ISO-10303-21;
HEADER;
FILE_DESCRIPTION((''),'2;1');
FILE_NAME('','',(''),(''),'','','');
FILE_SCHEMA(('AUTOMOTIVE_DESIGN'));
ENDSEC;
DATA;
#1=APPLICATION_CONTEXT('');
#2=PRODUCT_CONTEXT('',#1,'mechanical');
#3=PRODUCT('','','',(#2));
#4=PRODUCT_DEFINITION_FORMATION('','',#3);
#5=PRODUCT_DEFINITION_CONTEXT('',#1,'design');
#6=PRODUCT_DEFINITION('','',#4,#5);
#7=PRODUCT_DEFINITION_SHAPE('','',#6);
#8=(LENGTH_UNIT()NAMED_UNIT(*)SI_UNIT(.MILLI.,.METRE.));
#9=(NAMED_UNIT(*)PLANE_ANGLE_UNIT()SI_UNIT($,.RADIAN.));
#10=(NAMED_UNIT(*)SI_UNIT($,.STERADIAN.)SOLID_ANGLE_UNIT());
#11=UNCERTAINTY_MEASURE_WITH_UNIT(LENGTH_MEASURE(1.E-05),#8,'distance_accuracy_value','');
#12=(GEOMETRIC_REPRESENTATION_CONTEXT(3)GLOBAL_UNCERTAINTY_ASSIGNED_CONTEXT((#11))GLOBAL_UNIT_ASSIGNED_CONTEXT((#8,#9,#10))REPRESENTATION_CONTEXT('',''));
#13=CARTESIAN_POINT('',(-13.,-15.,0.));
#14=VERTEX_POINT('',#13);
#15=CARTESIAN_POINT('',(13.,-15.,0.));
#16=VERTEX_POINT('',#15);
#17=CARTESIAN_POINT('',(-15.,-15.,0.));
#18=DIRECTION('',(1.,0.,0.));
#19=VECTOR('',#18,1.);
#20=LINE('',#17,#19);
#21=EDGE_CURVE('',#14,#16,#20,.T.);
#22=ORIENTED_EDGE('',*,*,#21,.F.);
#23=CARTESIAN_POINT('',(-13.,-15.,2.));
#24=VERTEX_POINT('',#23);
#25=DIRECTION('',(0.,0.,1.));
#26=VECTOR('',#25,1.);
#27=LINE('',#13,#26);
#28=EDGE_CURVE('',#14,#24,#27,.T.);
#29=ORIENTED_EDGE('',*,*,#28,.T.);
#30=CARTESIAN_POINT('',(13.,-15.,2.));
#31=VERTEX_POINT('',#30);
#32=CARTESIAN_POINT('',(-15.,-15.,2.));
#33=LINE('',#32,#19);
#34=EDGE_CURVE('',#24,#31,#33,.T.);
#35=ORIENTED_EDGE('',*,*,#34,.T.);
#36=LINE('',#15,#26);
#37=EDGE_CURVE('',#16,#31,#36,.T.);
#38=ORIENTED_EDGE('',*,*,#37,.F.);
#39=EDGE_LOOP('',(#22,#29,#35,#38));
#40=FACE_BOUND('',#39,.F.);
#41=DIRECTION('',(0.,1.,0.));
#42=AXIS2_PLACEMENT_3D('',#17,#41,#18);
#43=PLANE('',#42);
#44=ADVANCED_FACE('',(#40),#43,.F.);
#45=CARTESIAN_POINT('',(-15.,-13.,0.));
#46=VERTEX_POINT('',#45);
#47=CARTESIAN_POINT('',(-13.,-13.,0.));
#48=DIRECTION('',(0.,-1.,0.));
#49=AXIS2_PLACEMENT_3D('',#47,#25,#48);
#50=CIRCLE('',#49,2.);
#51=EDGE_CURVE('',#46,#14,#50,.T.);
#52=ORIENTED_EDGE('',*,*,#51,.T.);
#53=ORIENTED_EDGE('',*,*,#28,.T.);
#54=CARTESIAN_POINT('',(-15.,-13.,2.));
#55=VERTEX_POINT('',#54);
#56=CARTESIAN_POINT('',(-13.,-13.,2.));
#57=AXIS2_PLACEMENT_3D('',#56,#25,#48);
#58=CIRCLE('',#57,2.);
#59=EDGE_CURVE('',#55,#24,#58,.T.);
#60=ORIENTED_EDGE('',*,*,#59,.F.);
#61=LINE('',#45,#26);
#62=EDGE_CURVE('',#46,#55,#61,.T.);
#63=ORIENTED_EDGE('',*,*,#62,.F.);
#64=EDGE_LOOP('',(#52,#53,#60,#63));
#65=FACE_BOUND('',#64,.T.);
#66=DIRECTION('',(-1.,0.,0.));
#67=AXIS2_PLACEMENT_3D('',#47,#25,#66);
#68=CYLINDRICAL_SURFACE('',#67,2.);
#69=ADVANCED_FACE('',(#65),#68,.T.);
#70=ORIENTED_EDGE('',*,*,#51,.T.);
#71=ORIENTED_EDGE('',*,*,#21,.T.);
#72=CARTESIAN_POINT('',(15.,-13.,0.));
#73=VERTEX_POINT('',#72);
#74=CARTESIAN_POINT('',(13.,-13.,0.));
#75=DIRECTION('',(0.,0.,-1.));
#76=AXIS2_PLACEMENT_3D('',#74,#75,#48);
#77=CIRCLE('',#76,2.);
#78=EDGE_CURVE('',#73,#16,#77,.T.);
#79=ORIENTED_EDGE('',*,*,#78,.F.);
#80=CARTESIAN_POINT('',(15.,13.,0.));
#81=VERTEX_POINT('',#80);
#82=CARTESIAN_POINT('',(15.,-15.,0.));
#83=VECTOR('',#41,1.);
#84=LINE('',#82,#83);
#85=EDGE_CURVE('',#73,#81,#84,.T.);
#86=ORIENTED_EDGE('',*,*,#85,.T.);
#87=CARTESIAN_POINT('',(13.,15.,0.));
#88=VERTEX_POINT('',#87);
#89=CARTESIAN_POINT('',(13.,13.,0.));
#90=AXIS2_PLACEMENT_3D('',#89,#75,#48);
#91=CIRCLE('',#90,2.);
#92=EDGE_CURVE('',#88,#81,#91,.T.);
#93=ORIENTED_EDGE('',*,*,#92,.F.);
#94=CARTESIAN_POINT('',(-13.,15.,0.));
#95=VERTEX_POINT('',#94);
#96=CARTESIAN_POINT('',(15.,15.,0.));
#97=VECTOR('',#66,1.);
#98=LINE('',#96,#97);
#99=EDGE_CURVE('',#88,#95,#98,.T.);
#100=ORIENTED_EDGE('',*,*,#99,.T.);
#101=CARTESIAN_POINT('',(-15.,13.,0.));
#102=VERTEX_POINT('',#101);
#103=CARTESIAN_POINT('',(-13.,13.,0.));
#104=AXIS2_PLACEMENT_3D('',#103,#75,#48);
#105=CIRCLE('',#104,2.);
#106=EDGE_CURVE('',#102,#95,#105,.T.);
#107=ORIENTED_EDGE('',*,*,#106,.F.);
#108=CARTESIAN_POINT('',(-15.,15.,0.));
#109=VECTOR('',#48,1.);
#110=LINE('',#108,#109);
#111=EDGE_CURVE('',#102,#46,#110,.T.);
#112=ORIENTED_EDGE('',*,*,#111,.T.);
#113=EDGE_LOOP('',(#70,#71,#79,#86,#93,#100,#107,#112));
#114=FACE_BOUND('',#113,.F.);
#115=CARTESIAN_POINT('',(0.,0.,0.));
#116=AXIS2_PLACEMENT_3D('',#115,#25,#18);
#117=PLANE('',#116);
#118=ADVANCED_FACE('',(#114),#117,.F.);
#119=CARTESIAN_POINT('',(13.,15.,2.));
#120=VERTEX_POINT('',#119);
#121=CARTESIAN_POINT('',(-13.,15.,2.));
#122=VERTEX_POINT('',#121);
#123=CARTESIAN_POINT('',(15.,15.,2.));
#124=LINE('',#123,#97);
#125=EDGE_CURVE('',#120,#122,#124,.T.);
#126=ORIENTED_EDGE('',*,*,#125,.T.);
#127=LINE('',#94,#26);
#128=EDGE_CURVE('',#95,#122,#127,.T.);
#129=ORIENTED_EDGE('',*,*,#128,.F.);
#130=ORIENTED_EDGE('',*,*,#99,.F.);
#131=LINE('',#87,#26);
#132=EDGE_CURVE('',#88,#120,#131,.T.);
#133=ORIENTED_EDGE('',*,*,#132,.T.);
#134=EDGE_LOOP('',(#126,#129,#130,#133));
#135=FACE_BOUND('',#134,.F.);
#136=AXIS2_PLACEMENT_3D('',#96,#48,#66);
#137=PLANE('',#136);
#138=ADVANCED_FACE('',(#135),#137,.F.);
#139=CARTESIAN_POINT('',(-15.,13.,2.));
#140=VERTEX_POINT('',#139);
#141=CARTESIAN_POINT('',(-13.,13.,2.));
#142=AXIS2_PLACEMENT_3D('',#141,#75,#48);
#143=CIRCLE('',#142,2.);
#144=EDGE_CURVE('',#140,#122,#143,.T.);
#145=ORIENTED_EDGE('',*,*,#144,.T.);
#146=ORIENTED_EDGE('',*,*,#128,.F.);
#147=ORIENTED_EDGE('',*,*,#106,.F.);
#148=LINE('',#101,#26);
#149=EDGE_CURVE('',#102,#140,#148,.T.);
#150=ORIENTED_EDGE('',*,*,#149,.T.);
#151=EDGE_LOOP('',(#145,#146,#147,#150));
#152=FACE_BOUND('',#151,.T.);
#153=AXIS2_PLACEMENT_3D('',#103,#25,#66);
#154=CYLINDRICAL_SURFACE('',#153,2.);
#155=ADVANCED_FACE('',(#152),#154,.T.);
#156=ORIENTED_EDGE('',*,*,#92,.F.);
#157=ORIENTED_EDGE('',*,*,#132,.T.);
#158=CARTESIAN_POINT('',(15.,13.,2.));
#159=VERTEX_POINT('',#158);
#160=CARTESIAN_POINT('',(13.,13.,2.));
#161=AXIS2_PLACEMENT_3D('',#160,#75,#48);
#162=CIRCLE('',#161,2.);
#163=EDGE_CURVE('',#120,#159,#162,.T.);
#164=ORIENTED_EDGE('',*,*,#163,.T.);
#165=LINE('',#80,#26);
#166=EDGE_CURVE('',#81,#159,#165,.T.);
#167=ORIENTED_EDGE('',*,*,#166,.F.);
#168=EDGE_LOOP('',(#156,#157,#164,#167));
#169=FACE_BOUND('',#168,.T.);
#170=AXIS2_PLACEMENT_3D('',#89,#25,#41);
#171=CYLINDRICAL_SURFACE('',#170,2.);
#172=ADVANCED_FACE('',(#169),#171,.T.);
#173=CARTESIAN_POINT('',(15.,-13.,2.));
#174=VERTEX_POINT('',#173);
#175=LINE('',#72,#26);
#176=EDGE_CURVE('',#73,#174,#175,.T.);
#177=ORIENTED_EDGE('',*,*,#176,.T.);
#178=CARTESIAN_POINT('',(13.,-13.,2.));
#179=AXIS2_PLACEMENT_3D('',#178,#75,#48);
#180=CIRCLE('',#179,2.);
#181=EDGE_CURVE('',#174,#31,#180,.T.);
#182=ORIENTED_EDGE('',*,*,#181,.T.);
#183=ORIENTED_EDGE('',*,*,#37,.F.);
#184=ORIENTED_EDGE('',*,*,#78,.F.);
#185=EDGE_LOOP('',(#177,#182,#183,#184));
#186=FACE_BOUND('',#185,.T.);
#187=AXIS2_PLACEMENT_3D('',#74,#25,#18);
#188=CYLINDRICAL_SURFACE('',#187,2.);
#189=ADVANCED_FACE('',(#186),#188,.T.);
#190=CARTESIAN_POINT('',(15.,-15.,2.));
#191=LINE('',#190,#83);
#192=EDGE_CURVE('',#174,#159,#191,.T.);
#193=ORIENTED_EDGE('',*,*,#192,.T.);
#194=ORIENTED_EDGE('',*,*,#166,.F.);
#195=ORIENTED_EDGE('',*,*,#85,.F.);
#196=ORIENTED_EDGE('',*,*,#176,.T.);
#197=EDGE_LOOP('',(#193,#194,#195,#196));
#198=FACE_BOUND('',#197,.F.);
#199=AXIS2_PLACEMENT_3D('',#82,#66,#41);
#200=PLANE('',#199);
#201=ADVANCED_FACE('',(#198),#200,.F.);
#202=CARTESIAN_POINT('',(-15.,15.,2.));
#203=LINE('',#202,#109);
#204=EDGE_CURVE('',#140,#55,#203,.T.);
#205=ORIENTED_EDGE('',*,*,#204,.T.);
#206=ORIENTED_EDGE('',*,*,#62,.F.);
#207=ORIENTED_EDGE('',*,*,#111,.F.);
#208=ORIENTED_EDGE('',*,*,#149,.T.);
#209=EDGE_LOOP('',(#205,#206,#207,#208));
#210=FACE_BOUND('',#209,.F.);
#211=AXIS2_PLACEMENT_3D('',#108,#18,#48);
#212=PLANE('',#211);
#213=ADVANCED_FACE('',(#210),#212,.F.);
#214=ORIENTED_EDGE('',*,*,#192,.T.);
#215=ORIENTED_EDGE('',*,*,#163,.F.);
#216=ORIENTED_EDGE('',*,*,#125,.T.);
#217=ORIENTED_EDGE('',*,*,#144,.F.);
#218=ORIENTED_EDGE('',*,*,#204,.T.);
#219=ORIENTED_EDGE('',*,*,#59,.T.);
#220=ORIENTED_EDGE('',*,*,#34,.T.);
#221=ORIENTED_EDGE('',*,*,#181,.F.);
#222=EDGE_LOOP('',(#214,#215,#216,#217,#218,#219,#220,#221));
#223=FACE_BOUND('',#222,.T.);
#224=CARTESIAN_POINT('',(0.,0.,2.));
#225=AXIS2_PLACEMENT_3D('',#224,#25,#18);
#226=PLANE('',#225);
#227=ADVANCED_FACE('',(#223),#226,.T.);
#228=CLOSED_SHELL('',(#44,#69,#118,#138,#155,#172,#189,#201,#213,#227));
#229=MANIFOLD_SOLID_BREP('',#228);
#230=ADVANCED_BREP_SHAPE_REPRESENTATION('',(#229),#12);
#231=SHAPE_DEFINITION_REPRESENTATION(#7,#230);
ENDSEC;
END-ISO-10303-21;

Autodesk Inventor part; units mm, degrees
ref_plane "YZ Plane" through (0, 0, 0) normal (1, 0, 0) x (0, 1, 0)
ref_plane "XZ Plane" through (0, 0, 0) normal (0, 1, 0) x (-1, 0, 0)
ref_plane "XY Plane" through (0, 0, 0) normal (0, 0, 1) x (1, 0, 0)
sketch "Sketch1" plane through (0, 0, 0) normal (0, 0, 1) x (1, 0, 0)
  line L0 (-15, -15) -> (15, -15)
  line L1 (15, -15) -> (15, 15)
  line L2 (15, 15) -> (-15, 15)
  line L3 (-15, 15) -> (-15, -15)
  line L4 (-15, -15) -> (15, 15) construction
  line L5 (15, -15) -> (-15, 15) construction
  point P0 (0, 0)
  dimension "d154" = 30
  dimension "d155" = 30
extrude "Plate5" add sketch "Sketch1" along normal blind 2
fillet "Corner Round1" radius 2 4 edges at (15, 15, 1) (-15, 15, 1) (-15, -15, 1) (15, -15, 1)
properties part number "TZS 1666 FDS 940 CUP 1" material "Stainless Steel"
